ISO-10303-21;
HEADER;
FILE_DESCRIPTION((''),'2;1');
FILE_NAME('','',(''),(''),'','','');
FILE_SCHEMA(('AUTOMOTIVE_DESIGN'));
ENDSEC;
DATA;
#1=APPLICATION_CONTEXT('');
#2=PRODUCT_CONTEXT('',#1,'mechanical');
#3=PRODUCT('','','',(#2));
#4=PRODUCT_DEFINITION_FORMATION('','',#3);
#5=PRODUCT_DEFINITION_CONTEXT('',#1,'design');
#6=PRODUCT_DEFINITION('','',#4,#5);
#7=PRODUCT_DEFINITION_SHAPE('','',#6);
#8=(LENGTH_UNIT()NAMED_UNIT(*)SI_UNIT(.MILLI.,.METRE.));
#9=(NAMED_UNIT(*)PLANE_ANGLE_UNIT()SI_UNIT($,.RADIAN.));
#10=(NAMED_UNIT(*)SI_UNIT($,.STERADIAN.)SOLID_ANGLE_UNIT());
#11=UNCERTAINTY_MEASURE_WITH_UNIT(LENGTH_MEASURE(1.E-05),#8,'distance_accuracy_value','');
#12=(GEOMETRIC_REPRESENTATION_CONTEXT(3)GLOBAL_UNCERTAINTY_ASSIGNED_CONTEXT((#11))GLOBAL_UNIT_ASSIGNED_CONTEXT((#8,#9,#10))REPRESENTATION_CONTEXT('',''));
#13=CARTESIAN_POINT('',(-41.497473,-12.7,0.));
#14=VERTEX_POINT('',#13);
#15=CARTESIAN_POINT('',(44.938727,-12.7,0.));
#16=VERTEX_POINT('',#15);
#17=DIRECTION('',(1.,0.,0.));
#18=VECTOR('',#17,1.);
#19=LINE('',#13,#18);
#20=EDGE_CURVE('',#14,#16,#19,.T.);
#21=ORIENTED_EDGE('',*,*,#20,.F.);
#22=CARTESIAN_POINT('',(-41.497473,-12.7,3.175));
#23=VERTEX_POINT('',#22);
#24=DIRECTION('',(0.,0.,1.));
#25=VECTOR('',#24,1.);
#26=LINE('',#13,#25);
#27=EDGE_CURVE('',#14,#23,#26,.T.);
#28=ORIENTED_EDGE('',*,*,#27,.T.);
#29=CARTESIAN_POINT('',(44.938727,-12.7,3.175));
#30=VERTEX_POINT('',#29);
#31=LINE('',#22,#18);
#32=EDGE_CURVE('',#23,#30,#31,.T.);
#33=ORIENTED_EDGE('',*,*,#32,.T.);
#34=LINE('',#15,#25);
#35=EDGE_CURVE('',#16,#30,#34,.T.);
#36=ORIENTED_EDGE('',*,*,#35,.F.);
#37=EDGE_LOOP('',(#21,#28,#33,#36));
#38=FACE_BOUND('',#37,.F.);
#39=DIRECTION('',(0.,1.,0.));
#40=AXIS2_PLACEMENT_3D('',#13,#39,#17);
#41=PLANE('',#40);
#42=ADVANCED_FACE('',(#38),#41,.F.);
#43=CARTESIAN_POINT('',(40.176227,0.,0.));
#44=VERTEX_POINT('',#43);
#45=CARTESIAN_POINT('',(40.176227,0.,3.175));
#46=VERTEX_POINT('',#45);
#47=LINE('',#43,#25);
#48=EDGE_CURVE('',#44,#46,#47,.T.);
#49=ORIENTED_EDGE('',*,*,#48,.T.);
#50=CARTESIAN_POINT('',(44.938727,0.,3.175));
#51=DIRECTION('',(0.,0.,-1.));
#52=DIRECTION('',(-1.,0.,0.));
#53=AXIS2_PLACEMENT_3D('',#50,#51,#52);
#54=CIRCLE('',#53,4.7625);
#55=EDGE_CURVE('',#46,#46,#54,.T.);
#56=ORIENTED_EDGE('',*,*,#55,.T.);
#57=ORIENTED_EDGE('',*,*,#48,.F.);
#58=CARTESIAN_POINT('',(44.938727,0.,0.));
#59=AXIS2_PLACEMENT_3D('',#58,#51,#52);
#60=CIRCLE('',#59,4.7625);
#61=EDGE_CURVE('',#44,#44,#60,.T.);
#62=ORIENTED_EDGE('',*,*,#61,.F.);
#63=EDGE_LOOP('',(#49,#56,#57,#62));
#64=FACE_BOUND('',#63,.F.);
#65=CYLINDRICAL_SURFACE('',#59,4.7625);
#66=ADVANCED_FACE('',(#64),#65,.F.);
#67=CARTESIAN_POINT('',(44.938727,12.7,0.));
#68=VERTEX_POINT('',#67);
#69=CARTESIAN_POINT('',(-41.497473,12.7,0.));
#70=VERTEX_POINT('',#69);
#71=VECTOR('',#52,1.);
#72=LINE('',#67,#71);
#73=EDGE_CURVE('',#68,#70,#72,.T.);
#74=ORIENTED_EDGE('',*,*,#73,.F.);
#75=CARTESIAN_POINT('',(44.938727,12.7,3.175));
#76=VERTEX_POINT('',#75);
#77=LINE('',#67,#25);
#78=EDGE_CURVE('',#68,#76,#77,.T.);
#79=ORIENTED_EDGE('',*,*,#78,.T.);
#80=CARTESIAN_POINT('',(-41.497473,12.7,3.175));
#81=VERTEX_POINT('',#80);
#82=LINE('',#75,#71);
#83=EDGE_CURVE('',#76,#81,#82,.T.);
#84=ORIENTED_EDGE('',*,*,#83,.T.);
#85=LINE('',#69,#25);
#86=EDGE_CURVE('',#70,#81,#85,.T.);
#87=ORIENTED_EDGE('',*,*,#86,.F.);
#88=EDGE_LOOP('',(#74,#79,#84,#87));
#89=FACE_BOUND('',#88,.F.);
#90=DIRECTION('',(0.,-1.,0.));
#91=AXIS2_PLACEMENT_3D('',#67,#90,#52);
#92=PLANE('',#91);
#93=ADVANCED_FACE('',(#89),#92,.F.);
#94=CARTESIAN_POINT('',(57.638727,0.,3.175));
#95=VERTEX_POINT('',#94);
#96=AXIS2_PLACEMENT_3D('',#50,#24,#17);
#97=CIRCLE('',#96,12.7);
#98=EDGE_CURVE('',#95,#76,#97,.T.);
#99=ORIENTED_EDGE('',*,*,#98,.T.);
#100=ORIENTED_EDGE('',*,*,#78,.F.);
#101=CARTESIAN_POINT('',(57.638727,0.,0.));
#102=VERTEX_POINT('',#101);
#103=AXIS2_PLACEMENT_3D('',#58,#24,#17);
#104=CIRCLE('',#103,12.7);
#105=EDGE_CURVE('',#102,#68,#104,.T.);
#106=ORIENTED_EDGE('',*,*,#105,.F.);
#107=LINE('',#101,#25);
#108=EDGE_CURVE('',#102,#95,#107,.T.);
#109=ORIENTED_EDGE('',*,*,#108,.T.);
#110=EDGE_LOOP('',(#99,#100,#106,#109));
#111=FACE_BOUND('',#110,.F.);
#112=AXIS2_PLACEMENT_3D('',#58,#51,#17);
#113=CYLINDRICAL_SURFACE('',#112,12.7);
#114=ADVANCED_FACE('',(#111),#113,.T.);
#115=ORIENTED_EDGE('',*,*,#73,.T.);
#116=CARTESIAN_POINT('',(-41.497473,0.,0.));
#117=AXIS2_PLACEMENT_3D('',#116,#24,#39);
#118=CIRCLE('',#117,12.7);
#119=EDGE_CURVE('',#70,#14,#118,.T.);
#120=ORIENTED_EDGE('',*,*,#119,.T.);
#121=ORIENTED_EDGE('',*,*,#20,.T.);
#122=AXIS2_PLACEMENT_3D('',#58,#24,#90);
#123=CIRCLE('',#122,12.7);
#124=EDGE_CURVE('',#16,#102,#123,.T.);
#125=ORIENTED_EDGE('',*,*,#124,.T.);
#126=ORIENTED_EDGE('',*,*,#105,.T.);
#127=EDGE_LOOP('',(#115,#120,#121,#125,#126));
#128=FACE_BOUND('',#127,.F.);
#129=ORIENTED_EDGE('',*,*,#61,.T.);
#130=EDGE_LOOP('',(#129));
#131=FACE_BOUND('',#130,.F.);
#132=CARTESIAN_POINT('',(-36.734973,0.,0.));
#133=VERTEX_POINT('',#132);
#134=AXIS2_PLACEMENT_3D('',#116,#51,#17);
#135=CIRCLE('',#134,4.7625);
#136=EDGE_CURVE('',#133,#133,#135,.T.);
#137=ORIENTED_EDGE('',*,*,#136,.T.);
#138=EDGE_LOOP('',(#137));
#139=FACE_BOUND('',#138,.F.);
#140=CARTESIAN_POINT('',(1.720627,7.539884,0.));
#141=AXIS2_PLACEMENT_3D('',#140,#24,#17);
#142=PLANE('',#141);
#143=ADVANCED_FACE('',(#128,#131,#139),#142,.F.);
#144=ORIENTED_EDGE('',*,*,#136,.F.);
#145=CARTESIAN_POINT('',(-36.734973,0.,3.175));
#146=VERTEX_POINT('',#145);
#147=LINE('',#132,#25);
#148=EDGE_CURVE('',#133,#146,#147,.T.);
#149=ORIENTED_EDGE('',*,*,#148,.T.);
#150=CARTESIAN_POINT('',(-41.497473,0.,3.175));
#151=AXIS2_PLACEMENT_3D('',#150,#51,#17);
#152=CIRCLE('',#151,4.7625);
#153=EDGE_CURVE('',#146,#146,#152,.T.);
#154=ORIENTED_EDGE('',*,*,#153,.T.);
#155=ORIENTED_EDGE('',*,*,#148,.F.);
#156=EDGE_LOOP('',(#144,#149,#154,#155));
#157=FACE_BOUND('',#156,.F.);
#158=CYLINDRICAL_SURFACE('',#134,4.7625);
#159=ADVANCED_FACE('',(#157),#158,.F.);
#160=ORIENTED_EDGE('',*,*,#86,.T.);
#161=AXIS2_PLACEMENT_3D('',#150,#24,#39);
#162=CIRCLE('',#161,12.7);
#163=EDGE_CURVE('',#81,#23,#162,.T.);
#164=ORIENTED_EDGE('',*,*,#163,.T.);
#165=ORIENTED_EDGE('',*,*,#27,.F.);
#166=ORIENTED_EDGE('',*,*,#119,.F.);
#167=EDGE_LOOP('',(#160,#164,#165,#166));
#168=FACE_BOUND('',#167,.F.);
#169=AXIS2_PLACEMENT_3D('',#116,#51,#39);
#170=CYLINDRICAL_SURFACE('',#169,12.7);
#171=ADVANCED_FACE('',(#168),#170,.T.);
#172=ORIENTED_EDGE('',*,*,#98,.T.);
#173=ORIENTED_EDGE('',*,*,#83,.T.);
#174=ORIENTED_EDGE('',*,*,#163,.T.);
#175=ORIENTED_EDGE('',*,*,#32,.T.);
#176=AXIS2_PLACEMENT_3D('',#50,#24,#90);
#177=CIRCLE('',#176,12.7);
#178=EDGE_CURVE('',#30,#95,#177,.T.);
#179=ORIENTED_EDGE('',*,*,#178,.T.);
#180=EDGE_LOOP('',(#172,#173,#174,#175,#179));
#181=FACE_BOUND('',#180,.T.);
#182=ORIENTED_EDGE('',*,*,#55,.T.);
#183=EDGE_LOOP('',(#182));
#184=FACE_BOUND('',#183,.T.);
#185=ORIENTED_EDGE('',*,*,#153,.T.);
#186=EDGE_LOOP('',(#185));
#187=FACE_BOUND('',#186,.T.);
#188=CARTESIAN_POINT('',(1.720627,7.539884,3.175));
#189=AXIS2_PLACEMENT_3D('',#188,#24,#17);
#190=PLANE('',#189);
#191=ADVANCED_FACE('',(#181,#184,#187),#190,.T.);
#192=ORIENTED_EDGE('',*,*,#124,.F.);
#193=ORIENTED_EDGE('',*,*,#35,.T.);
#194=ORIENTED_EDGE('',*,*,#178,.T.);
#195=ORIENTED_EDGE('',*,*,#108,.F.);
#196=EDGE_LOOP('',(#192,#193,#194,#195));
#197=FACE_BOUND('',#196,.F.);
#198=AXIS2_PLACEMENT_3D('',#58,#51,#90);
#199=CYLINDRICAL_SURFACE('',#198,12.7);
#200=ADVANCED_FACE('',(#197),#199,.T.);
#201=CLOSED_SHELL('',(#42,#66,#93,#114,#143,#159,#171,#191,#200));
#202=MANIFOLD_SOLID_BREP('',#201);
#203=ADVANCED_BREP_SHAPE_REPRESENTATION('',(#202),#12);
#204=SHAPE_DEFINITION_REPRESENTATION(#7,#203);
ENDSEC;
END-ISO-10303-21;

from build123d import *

# Parameters (mm, degrees)
F1_DEPTH = 3.175


# Not quite as in the source:
# - a length typed as a fraction of an inch, garbled in the dataset ("3 / 203.2 mm" for 3/8 in), is restored


with BuildPart() as f1:
    # F0 (on Top) → F1 (new body)
    with BuildSketch(Plane.XY):
        with BuildLine():
            ThreePointArc((-41.4974734498, 12.7), (-32.5172173287, 8.9802561211), (-28.7974734498, 0))
            Line((-28.7974734498, 0), (32.2387265502, 0))
            ThreePointArc((32.2387265502, 0), (35.9584704291, 8.9802561211), (44.9387265502, 12.7))
            Line((44.9387265502, 12.7), (-41.4974734498, 12.7))
        make_face()
        with BuildLine():
            ThreePointArc((-41.4974734498, -4.7625), (-44.8650694952, 3.3675960454), (-36.7349734498, 0))
            Line((-36.7349734498, 0), (-28.7974734498, 0))
            ThreePointArc((-28.7974734498, 0), (-32.5172173287, 8.9802561211), (-41.4974734498, 12.7))
            ThreePointArc((-41.4974734498, 12.7), (-54.1974734498, 0), (-41.4974734498, -12.7))
            Line((-41.4974734498, -12.7), (-41.4974734498, -4.7625))
        make_face()
        with BuildLine():
            Line((-28.7974734498, 0), (-36.7349734498, 0))
            ThreePointArc((-36.7349734498, 0), (-38.1298774044, -3.3675960454), (-41.4974734498, -4.7625))
            Line((-41.4974734498, -4.7625), (-41.4974734498, -12.7))
            ThreePointArc((-41.4974734498, -12.7), (-32.5172173287, -8.9802561211), (-28.7974734498, 0))
        make_face()
        with BuildLine():
            Line((32.2387265502, 0), (-28.7974734498, 0))
            ThreePointArc((-28.7974734498, 0), (-32.5172173287, -8.9802561211), (-41.4974734498, -12.7))
            Line((-41.4974734498, -12.7), (44.9387265502, -12.7))
            ThreePointArc((44.9387265502, -12.7), (35.9584704291, -8.9802561211), (32.2387265502, 0))
        make_face()
        with BuildLine():
            ThreePointArc((44.9387265502, 12.7), (35.9584704291, 8.9802561211), (32.2387265502, 0))
            ThreePointArc((32.2387265502, 0), (35.9584704291, -8.9802561211), (44.9387265502, -12.7))
            ThreePointArc((44.9387265502, -12.7), (53.9189826713, -8.9802561211), (57.6387265502, 0))
            ThreePointArc((57.6387265502, 0), (53.9189826713, 8.9802561211), (44.9387265502, 12.7))
        make_face()
        with BuildLine():
            ThreePointArc((49.7012265502, 0), (44.9387265502, -4.7625), (40.1762265502, 0))
            ThreePointArc((40.1762265502, 0), (44.9387265502, 4.7625), (49.7012265502, 0))
        make_face(mode=Mode.SUBTRACT)
    extrude(amount=F1_DEPTH)


solid = f1.part
